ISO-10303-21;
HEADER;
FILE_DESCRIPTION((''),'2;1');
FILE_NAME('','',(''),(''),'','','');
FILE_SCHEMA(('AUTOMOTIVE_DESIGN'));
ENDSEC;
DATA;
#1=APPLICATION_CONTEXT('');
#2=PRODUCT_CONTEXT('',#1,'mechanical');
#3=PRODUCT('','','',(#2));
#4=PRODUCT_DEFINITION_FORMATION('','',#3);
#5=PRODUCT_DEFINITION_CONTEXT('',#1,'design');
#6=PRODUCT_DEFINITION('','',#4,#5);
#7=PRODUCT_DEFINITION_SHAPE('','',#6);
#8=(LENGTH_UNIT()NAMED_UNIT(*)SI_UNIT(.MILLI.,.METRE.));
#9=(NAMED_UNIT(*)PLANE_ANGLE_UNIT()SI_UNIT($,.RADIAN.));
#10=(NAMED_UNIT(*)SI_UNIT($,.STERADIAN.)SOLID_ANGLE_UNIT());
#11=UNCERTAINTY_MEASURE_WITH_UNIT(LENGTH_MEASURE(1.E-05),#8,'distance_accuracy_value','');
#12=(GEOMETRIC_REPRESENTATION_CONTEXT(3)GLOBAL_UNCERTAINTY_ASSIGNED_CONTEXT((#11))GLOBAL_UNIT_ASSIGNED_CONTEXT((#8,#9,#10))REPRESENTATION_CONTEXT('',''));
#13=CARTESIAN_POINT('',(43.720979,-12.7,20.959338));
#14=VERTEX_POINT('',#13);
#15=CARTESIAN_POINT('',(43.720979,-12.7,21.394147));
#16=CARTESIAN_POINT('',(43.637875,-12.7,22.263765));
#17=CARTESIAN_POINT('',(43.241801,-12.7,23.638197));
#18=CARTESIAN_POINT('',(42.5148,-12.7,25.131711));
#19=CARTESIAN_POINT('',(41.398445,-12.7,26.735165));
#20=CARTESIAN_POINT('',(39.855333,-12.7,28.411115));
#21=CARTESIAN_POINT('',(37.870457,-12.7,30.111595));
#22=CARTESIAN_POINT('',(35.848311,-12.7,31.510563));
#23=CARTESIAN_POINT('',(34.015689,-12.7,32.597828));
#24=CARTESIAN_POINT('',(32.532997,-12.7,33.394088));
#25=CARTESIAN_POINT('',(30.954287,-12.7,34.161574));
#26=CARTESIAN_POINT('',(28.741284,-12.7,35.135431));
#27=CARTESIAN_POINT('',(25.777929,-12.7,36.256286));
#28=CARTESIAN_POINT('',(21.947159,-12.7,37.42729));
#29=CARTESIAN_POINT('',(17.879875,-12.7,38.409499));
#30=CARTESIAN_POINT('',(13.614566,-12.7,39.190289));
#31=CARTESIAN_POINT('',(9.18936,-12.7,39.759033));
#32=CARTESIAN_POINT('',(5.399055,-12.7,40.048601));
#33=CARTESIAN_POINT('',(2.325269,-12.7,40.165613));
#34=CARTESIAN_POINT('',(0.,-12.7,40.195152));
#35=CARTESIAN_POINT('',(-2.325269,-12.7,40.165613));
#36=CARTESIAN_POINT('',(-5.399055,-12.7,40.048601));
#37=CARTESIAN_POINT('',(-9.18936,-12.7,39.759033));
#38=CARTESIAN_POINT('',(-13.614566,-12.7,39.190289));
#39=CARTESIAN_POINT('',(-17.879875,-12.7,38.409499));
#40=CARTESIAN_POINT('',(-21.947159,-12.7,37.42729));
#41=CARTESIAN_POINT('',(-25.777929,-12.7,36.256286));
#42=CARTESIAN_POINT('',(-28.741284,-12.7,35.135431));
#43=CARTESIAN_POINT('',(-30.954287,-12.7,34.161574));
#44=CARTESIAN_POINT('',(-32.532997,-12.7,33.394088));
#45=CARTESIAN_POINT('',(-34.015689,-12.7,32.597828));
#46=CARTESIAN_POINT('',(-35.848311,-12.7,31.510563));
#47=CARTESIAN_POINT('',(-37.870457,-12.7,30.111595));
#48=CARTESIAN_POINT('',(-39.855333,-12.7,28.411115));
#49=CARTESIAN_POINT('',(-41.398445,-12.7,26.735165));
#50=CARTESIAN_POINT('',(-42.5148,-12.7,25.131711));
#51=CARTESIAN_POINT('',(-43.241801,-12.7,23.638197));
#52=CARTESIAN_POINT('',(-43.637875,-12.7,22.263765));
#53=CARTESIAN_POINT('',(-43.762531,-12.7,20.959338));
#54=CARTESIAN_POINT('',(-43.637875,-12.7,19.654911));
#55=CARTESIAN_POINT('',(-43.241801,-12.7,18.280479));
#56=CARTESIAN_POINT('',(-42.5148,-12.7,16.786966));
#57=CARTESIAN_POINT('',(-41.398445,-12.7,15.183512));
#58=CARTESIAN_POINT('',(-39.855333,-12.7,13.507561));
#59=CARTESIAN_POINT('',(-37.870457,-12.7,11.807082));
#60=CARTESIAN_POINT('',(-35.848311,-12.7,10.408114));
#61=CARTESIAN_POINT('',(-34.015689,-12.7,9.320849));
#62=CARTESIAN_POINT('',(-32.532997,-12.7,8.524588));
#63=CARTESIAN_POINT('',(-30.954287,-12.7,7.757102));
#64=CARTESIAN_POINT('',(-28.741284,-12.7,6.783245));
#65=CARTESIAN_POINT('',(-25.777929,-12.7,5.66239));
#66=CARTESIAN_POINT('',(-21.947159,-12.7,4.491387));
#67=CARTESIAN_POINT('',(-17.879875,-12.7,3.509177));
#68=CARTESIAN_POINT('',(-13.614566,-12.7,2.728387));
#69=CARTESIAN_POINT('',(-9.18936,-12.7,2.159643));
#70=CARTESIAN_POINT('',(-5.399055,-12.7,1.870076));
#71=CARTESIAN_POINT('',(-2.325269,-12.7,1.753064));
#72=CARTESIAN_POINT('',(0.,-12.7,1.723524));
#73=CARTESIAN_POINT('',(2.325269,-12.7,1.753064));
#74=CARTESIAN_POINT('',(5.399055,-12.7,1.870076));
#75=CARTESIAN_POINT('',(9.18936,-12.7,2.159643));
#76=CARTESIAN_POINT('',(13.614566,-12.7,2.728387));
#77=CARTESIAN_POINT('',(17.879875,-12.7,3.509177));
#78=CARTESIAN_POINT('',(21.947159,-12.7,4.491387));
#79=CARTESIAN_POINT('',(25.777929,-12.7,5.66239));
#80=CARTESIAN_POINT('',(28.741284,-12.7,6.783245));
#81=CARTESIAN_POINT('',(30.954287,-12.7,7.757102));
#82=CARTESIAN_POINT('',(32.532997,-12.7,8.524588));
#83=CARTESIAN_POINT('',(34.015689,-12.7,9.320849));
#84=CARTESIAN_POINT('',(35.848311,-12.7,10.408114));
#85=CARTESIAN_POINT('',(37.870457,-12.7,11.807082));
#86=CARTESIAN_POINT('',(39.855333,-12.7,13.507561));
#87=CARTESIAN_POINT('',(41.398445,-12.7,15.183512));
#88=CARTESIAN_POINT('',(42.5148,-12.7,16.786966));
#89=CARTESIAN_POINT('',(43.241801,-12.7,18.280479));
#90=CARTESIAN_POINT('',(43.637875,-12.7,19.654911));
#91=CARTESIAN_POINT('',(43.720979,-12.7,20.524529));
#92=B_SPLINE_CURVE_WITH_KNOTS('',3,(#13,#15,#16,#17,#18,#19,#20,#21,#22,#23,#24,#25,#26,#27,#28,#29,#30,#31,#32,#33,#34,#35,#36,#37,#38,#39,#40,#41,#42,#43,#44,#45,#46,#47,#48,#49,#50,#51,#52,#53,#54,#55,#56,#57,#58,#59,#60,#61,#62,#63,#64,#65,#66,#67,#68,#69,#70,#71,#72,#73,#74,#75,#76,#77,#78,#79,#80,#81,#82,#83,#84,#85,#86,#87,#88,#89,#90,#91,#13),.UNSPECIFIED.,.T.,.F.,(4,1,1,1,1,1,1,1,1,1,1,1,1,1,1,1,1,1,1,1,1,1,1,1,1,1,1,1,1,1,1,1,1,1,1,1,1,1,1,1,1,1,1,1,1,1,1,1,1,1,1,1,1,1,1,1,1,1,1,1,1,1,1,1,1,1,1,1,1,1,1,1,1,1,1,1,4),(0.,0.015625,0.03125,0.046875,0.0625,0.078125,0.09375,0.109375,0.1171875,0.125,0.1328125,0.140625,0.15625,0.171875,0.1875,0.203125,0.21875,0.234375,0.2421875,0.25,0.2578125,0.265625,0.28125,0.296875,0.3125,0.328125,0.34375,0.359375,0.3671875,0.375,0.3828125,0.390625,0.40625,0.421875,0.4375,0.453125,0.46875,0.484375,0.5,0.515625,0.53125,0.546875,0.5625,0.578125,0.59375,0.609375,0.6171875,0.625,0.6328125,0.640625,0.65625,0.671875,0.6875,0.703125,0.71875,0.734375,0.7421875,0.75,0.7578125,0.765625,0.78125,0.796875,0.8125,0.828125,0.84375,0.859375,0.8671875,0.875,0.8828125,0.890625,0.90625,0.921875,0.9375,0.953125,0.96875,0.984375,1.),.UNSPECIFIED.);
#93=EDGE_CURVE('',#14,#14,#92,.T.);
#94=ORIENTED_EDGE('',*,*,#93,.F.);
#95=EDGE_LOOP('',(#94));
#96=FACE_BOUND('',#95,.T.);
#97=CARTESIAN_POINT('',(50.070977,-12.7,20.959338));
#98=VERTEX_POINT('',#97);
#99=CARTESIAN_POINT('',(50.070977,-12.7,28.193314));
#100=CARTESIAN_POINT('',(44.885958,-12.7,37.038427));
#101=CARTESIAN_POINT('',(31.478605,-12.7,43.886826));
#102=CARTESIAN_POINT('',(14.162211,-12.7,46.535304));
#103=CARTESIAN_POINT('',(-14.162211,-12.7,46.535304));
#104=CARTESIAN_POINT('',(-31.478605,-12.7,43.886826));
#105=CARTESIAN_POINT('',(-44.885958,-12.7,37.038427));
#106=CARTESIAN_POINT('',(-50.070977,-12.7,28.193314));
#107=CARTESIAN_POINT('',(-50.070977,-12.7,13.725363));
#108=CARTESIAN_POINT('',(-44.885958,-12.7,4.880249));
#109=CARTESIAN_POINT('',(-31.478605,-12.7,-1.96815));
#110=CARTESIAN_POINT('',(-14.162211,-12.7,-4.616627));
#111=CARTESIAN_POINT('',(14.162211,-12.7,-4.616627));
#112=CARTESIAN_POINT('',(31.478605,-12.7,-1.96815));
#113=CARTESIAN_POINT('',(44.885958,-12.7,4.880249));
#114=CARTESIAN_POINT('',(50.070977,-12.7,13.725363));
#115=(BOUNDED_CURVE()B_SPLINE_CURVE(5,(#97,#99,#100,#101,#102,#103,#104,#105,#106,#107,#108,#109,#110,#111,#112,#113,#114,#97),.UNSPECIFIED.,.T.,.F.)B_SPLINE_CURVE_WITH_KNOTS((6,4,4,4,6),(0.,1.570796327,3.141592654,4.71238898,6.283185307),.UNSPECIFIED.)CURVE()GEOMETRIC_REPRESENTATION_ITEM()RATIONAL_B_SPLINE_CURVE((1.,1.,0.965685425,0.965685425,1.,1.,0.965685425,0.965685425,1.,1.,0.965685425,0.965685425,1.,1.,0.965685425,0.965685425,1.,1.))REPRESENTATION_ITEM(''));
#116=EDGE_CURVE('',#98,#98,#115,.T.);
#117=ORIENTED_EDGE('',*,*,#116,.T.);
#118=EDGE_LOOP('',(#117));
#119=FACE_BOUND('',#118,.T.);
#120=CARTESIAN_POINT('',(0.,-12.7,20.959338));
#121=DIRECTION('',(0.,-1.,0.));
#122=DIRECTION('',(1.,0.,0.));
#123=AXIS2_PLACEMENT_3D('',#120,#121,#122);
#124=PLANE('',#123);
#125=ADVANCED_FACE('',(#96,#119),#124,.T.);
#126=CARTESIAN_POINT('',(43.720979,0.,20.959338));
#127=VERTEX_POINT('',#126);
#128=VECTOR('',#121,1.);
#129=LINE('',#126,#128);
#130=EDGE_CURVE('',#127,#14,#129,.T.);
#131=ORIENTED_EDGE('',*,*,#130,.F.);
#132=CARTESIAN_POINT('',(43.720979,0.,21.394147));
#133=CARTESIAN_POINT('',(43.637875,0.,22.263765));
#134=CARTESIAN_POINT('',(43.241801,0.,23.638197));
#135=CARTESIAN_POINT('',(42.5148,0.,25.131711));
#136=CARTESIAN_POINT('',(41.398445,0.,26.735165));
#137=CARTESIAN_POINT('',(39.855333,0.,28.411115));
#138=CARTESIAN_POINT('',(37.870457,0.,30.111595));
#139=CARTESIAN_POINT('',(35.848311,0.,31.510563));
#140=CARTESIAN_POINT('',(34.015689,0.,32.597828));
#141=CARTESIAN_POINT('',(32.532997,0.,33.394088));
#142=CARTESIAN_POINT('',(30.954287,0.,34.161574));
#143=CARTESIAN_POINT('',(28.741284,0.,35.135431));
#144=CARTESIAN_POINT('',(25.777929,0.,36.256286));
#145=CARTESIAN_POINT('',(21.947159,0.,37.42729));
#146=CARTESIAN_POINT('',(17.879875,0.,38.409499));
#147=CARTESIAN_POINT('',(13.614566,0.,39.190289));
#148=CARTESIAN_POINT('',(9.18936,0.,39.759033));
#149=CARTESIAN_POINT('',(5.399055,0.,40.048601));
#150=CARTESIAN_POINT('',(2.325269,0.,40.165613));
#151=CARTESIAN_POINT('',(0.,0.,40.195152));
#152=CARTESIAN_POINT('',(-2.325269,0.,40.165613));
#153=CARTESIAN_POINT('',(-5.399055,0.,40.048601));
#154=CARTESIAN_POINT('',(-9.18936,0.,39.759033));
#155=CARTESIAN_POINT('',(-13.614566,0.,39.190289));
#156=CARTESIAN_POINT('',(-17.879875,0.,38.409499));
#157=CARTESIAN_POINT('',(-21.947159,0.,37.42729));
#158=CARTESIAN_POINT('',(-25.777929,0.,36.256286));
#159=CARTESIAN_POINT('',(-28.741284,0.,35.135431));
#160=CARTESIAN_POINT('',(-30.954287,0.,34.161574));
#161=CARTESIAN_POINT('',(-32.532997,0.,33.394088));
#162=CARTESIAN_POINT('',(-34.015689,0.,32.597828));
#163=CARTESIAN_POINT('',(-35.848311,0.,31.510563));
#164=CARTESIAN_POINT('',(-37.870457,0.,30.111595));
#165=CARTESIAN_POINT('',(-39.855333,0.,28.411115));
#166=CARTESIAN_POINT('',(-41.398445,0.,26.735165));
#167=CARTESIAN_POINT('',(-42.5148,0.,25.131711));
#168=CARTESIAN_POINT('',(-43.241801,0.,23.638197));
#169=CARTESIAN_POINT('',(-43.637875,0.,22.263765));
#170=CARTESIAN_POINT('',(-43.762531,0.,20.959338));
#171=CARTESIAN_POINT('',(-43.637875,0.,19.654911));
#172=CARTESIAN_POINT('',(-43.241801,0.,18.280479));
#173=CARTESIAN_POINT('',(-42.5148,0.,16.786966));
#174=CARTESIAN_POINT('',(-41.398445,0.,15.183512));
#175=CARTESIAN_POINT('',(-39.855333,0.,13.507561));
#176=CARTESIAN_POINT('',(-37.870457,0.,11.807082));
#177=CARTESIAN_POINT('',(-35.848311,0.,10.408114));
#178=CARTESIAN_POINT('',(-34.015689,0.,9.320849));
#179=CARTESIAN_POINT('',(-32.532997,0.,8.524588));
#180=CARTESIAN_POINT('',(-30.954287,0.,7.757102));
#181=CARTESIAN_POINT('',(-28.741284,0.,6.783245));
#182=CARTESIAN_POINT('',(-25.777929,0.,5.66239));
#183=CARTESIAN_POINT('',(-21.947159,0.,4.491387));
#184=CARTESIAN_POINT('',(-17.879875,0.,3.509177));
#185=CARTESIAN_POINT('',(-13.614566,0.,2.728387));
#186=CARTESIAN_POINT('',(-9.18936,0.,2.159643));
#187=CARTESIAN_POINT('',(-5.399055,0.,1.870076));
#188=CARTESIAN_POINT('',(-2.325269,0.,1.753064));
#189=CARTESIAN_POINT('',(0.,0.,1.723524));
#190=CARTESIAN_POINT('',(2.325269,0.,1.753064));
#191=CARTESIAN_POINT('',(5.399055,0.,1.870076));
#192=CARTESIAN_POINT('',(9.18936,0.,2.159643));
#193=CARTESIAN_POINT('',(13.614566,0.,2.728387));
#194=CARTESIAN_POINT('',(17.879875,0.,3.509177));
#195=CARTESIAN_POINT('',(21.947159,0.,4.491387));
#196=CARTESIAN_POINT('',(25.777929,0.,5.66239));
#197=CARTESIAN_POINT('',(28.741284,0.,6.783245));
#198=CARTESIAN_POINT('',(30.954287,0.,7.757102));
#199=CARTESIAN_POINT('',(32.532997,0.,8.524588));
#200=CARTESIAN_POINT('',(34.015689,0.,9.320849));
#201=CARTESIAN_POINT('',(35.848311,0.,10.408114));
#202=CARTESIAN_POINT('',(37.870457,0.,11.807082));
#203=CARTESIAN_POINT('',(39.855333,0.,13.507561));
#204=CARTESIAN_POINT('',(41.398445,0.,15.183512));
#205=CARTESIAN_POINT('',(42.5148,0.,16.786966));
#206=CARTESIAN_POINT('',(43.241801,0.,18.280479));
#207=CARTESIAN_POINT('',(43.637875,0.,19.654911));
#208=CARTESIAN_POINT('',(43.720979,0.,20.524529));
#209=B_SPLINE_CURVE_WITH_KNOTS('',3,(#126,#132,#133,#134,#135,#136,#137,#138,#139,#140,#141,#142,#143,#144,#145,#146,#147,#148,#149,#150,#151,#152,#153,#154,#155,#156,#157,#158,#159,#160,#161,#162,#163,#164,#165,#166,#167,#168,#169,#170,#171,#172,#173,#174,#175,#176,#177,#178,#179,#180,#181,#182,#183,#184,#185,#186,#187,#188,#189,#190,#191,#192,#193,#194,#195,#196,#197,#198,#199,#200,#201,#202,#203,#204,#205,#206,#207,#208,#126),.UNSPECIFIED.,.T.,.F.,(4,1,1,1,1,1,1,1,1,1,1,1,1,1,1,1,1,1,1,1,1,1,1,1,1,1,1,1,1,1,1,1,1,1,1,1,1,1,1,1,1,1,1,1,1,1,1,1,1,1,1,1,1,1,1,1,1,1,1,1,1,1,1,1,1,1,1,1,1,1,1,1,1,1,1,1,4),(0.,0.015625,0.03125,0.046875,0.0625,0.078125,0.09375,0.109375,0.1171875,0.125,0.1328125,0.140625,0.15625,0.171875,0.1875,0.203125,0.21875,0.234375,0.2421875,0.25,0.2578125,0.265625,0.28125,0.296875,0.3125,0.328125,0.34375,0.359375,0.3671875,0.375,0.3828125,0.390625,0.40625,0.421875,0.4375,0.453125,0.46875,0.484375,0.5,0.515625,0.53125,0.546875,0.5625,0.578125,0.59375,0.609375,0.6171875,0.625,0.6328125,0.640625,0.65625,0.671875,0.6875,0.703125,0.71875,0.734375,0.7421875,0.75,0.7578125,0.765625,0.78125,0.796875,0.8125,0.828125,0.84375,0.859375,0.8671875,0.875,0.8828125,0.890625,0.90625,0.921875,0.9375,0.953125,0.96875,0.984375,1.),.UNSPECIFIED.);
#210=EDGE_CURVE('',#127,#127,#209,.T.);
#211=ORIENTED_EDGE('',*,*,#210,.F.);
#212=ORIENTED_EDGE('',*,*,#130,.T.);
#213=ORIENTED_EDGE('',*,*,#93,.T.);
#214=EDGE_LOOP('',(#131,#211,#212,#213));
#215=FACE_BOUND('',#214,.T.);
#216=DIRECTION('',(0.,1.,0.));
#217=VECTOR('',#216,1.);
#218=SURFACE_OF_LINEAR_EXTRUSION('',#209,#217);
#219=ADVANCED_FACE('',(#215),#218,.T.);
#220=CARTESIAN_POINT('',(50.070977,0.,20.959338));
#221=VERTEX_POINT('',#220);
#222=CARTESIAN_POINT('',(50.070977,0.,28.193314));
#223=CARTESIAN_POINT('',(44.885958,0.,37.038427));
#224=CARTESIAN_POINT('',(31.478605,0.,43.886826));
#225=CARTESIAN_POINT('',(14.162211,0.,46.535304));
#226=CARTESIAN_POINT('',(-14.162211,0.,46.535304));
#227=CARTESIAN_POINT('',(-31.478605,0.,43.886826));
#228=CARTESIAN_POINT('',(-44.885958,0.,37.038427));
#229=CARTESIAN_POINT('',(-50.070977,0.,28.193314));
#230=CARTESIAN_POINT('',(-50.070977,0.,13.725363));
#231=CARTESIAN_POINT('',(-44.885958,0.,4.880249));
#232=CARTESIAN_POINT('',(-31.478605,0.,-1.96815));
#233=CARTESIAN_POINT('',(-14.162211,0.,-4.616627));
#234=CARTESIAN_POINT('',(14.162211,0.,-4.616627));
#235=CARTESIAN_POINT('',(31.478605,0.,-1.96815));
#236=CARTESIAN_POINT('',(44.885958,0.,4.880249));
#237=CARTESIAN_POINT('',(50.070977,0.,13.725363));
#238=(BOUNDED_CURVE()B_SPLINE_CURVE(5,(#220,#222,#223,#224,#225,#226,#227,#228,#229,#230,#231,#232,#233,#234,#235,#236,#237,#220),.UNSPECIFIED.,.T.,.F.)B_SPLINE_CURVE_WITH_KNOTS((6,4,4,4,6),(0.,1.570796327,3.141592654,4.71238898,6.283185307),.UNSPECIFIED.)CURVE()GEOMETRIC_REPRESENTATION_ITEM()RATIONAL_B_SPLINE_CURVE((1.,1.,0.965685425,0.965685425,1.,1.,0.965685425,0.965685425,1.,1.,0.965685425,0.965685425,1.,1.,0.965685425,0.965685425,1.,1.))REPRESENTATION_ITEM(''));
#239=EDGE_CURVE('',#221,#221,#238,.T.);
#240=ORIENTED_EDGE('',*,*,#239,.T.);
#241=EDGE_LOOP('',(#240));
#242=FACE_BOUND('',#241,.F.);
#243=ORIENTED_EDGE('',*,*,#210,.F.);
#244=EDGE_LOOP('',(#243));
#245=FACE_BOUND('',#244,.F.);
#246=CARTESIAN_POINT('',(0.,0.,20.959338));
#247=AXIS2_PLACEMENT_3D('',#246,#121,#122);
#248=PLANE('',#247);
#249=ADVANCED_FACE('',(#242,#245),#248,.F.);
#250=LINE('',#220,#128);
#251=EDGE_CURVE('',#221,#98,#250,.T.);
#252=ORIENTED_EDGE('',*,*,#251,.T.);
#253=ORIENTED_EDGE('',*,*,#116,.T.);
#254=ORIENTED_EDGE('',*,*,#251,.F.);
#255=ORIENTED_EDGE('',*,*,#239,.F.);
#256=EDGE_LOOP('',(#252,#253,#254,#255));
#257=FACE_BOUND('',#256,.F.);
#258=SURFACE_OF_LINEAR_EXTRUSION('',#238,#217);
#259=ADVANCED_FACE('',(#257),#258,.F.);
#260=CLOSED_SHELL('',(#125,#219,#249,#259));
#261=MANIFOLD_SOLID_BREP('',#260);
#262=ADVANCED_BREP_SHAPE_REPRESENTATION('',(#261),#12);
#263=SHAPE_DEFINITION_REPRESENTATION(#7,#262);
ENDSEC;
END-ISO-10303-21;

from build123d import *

# Parameters (mm, degrees)
F1_DEPTH = 12.7


# Not quite as in the source:
# - the dataset's text gives a spline's control points without its knots; the knots are read off the source's solid


with BuildPart() as f1:
    # F0 (on Front) → F1 (new body)
    with BuildSketch(Plane.XZ):
        with BuildLine():
            add(Edge.make_bspline(
                [(-50.0709774524, 20.9593381733), (-50.0709774524, -4.6166274828), (0, -4.6166274828), (50.0709774524, -4.6166274828), (50.0709774524, 20.9593381733)],
                knots=[3.1415926536, 3.1415926536, 3.1415926536, 4.7123889804, 4.7123889804, 6.2831853072, 6.2831853072, 6.2831853072], degree=2, weights=[1, 0.7071067812, 1, 0.7071067812, 1]))
            add(Edge.make_bspline(
                [(50.0709774524, 20.9593381733), (50.0709774524, 46.5353038293), (0, 46.5353038293), (-50.0709774524, 46.5353038293), (-50.0709774524, 20.9593381733)],
                knots=[0, 0, 0, 1.5707963268, 1.5707963268, 3.1415926536, 3.1415926536, 3.1415926536], degree=2, weights=[1, 0.7071067812, 1, 0.7071067812, 1]))
        make_face()
        with BuildLine():
            add(Edge.make_bspline(
                [(43.7209792435, 20.9593381733), (43.7209792435, 21.3941472691), (43.6378753479, 22.2637654609), (43.2418012763, 23.6381973689), (42.5148002756, 25.1317105062), (41.3984450909, 26.7351645875), (39.8553329616, 28.4111151874), (37.8704569502, 30.1115948), (35.8483113142, 31.5105625364), (34.0156886195, 32.5978275083), (32.5329973261, 33.3940879703), (30.9542874849, 34.1615740967), (28.741284138, 35.135430875), (25.7779291071, 36.2562859365), (21.9471588703, 37.4272897947), (17.8798753761, 38.4094991021), (13.6145661437, 39.1902890225), (9.1893604501, 39.7590330821), (5.3990551476, 40.0486007433), (2.3252694229, 40.1656128335), (0, 40.1951520139), (-2.3252694229, 40.1656128335), (-5.3990551476, 40.0486007433), (-9.1893604501, 39.7590330821), (-13.6145661437, 39.1902890225), (-17.8798753761, 38.4094991021), (-21.9471588703, 37.4272897947), (-25.7779291071, 36.2562859365), (-28.741284138, 35.135430875), (-30.9542874849, 34.1615740967), (-32.5329973261, 33.3940879703), (-34.0156886195, 32.5978275083), (-35.8483113142, 31.5105625364), (-37.8704569502, 30.1115948), (-39.8553329616, 28.4111151874), (-41.3984450909, 26.7351645875), (-42.5148002756, 25.1317105062), (-43.2418012763, 23.6381973689), (-43.6378753479, 22.2637654609), (-43.7625311913, 20.9593381733), (-43.6378753479, 19.6549108857), (-43.2418012763, 18.2804789776), (-42.5148002756, 16.7869658404), (-41.3984450909, 15.183511759), (-39.8553329616, 13.5075611592), (-37.8704569502, 11.8070815465), (-35.8483113142, 10.4081138101), (-34.0156886195, 9.3208488383), (-32.5329973261, 8.5245883762), (-30.9542874849, 7.7571022498), (-28.741284138, 6.7832454715), (-25.7779291071, 5.66239041), (-21.9471588703, 4.4913865518), (-17.8798753761, 3.5091772444), (-13.6145661437, 2.7283873241), (-9.1893604501, 2.1596432645), (-5.3990551476, 1.8700756033), (-2.3252694229, 1.753063513), (0, 1.7235243327), (2.3252694229, 1.753063513), (5.3990551476, 1.8700756033), (9.1893604501, 2.1596432645), (13.6145661437, 2.7283873241), (17.8798753761, 3.5091772444), (21.9471588703, 4.4913865518), (25.7779291071, 5.66239041), (28.741284138, 6.7832454715), (30.9542874849, 7.7571022498), (32.5329973261, 8.5245883762), (34.0156886195, 9.3208488383), (35.8483113142, 10.4081138101), (37.8704569502, 11.8070815465), (39.8553329616, 13.5075611592), (41.3984450909, 15.183511759), (42.5148002756, 16.7869658404), (43.2418012763, 18.2804789776), (43.6378753479, 19.6549108857), (43.7209792435, 20.5245290774), (43.7209792435, 20.9593381733)],
                knots=[0, 0, 0, 0, 0.015625, 0.03125, 0.046875, 0.0625, 0.078125, 0.09375, 0.109375, 0.1171875, 0.125, 0.1328125, 0.140625, 0.15625, 0.171875, 0.1875, 0.203125, 0.21875, 0.234375, 0.2421875, 0.25, 0.2578125, 0.265625, 0.28125, 0.296875, 0.3125, 0.328125, 0.34375, 0.359375, 0.3671875, 0.375, 0.3828125, 0.390625, 0.40625, 0.421875, 0.4375, 0.453125, 0.46875, 0.484375, 0.5, 0.515625, 0.53125, 0.546875, 0.5625, 0.578125, 0.59375, 0.609375, 0.6171875, 0.625, 0.6328125, 0.640625, 0.65625, 0.671875, 0.6875, 0.703125, 0.71875, 0.734375, 0.7421875, 0.75, 0.7578125, 0.765625, 0.78125, 0.796875, 0.8125, 0.828125, 0.84375, 0.859375, 0.8671875, 0.875, 0.8828125, 0.890625, 0.90625, 0.921875, 0.9375, 0.953125, 0.96875, 0.984375, 1, 1, 1, 1], degree=3))
        make_face(mode=Mode.SUBTRACT)
    extrude(amount=F1_DEPTH)


solid = f1.part
